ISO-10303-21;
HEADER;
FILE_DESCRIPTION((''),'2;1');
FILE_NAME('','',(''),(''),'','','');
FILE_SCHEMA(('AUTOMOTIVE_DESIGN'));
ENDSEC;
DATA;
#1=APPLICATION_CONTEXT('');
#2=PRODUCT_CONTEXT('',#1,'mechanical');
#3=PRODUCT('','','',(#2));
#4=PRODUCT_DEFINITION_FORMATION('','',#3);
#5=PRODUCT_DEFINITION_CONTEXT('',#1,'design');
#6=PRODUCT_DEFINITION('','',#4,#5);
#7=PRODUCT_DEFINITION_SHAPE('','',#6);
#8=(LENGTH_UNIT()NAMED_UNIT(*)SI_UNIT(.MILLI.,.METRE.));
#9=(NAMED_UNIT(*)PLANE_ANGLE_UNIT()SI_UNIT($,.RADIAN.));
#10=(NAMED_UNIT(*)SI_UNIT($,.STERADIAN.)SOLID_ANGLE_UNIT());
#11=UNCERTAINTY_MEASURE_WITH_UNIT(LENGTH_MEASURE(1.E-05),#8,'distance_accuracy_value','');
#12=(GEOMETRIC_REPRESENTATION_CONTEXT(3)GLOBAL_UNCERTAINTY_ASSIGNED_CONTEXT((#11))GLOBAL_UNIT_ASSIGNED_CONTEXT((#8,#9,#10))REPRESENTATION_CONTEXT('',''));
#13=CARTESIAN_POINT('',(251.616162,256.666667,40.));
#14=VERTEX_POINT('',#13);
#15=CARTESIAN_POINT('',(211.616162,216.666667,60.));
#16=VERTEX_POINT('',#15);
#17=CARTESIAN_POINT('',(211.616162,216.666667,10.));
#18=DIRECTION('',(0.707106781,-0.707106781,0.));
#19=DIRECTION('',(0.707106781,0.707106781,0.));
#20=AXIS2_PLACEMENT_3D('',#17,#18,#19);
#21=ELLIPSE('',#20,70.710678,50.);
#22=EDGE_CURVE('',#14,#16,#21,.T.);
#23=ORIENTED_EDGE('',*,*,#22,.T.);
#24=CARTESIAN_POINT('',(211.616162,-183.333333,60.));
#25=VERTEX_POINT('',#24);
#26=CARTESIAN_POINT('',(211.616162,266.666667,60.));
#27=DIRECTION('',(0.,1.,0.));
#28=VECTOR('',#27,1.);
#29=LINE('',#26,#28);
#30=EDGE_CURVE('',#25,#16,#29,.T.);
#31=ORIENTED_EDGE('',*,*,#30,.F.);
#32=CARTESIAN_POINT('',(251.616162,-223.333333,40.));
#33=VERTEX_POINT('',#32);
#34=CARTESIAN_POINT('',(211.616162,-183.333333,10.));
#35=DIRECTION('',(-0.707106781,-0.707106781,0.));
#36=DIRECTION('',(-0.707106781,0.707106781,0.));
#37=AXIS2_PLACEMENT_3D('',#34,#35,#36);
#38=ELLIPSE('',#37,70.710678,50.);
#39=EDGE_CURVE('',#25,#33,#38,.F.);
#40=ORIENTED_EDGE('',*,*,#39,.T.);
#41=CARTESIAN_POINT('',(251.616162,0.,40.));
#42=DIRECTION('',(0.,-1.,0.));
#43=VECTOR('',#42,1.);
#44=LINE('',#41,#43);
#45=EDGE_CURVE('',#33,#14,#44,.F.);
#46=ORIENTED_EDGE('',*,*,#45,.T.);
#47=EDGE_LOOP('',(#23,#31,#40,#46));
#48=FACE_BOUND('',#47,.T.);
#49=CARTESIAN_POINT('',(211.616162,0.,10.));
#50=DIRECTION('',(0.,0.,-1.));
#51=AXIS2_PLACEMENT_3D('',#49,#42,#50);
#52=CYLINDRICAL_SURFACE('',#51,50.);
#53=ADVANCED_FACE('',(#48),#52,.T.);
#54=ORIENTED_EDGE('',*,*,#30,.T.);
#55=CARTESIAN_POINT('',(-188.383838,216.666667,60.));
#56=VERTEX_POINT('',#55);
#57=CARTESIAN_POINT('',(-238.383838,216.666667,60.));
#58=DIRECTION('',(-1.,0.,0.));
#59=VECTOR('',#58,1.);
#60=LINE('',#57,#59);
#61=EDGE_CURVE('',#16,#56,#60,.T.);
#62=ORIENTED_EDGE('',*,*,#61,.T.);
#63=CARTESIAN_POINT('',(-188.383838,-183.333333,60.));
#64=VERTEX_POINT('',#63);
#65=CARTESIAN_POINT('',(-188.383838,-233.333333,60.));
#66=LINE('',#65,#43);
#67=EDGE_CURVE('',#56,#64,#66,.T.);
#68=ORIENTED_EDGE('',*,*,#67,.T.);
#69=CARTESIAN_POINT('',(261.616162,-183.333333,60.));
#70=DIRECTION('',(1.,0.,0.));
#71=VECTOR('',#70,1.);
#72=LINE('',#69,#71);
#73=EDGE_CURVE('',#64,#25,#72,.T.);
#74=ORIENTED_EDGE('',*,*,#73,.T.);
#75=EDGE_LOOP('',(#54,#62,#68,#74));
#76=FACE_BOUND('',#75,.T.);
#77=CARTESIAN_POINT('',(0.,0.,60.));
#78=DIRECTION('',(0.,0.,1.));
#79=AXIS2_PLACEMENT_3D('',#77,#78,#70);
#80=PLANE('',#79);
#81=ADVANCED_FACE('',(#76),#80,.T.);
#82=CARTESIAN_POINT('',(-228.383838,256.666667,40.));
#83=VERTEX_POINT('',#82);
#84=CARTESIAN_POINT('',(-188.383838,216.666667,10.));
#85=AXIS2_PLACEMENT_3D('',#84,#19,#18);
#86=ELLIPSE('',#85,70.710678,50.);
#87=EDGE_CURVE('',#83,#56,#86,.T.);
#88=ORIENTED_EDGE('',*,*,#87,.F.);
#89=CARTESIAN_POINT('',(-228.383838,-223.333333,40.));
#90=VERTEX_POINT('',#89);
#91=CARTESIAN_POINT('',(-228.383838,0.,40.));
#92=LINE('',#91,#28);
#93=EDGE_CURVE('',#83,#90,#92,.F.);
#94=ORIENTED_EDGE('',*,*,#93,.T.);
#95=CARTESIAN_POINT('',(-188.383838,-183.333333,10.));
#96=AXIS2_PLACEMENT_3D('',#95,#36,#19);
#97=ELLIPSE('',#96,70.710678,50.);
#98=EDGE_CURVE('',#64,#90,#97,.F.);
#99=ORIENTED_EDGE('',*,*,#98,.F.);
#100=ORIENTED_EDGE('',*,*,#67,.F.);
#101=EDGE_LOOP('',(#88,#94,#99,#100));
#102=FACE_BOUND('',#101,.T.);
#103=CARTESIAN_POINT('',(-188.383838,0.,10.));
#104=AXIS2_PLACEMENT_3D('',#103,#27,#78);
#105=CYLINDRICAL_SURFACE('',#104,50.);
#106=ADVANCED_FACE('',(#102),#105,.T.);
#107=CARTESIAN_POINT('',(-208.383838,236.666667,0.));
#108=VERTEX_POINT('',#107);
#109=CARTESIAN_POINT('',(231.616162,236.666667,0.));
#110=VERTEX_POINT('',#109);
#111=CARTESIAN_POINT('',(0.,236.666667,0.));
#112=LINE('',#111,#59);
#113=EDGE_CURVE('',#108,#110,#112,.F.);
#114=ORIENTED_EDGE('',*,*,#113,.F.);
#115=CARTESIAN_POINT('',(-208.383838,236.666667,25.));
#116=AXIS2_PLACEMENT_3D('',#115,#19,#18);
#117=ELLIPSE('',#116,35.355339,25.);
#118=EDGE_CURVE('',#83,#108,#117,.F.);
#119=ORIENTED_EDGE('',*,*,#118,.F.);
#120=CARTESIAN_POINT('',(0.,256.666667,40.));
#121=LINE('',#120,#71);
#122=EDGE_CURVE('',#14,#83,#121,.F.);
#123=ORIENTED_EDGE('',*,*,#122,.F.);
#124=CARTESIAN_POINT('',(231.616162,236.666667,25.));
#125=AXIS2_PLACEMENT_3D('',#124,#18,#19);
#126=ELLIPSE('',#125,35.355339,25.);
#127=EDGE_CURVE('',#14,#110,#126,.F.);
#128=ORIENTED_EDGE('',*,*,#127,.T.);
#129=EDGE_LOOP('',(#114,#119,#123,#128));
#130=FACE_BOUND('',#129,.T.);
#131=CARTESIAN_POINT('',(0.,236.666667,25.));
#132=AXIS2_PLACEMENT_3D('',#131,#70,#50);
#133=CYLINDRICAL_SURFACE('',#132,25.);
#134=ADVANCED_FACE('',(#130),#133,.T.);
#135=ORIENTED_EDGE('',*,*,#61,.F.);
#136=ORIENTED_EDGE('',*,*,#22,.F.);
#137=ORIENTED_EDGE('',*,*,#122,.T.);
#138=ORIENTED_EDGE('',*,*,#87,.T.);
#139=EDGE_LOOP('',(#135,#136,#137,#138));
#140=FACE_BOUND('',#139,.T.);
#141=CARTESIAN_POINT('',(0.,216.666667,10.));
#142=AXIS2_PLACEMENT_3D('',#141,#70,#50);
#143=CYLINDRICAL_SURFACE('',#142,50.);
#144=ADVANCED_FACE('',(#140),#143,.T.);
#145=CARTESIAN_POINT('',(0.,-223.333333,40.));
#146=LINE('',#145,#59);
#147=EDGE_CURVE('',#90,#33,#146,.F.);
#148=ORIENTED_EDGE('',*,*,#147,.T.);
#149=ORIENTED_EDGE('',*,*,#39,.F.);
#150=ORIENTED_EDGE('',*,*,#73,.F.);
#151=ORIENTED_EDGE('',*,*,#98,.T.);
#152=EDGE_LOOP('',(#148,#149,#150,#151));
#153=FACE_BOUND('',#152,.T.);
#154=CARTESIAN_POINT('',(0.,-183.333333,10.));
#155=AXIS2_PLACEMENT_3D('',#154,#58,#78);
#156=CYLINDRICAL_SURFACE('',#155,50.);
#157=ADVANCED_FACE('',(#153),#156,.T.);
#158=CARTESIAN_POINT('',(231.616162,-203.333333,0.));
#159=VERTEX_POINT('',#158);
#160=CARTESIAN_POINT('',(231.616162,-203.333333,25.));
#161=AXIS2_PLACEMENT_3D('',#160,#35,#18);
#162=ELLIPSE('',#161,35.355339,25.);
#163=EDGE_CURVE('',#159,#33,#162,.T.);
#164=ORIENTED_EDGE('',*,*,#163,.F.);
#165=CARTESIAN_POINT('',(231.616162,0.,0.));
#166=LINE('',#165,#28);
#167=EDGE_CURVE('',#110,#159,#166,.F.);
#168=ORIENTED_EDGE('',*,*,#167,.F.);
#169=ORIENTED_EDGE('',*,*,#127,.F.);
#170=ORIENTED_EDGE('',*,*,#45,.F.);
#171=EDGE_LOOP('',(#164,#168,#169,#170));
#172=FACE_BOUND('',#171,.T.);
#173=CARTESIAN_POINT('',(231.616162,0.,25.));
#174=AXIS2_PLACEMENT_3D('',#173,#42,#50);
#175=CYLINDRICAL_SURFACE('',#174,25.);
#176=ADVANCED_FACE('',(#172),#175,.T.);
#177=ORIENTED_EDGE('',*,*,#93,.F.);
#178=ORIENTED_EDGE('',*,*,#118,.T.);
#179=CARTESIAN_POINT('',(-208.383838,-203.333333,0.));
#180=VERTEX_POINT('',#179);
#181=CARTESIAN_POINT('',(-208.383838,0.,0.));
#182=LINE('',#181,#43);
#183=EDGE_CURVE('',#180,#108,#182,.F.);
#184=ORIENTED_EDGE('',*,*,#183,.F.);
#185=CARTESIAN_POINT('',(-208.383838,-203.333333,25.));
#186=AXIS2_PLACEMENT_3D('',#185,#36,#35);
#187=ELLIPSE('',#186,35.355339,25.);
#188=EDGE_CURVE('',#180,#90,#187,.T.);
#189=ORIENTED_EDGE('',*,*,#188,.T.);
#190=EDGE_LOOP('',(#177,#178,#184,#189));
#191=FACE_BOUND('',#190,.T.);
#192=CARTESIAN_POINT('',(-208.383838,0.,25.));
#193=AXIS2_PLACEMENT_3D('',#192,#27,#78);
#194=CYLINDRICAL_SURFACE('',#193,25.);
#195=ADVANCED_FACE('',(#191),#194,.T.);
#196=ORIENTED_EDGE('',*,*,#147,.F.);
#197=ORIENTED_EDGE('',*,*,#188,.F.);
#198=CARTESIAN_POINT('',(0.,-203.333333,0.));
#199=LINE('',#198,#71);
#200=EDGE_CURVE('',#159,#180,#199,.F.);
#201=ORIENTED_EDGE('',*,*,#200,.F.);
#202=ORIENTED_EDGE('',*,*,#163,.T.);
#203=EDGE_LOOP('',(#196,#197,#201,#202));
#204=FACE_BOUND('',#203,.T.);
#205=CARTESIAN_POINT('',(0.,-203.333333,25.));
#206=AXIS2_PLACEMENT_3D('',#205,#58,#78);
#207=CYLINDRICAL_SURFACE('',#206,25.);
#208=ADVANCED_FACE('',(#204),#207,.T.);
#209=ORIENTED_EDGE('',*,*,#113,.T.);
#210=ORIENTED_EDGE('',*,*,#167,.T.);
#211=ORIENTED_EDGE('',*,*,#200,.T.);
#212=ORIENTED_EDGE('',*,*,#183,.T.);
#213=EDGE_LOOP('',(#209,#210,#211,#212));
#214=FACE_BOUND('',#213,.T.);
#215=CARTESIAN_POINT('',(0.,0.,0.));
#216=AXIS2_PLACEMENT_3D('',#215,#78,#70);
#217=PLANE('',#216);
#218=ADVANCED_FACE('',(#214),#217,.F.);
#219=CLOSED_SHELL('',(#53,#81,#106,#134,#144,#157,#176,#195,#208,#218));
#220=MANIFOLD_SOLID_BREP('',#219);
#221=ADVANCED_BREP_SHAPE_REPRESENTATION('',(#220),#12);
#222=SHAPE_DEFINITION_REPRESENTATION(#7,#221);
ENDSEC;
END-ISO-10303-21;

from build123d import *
from OCP.BRepAlgoAPI import BRepAlgoAPI_Cut
from OCP.TopTools import TopTools_ListOfShape

# Parameters (mm, degrees)
SKETCH1_W           = 500
SKETCH1_H           = 500
BOSS_EXTRUDE1_DEPTH = 60
FILLET3_R           = 50
FILLET4_R           = 50
FILLET6_START       = -234
FILLET6_DEPTH       = 502
FILLET6_2_DEPTH     = 492


with BuildPart() as part:
    # Sketch1 → Boss-Extrude1 (new body)
    with BuildSketch(Plane.XY):
        with Locations((11.616161616, 16.666666667)):
            Rectangle(SKETCH1_W, SKETCH1_H)
    extrude(amount=BOSS_EXTRUDE1_DEPTH)

    # Fillet3
    fillet3_edges = [part.edges().sort_by_distance(p)[0] for p in [
        (11.616161616, -233.333333333, 60),
        (261.616161616, 16.666666667, 60),
        (11.616161616, 266.666666667, 60),
        (-238.383838384, 16.666666667, 60),
    ]]
    fillet(fillet3_edges, radius=FILLET3_R)

    # Fillet4
    # the kernel refuses this fillet: 50 mm, written as the material it takes off along each edge
    with BuildSketch(Plane(origin=(-238.383838384, 341.666666667, 0), x_dir=(0, 0, 1), z_dir=(0, -1, 0)), Plane(origin=(336.616161616, 266.666666667, 0), x_dir=(0, 0, 1), z_dir=(-1, 0, 0))) as fillet4_piece_1:
        with BuildLine():
            CenterArc((50, -30), FILLET4_R, 143.130102354, 36.869897646)
            Line((0, -30), (-1, -30))
            Line((-1, -30), (-1, 0))
            Line((-1, 0), (0, 1))
            ThreePointArc((0, 1), (5, 1), (9.2, 0.6))
            Line((9.2, 0.6), (10, 0))
        make_face()
    extrude(amount=650, mode=Mode.SUBTRACT)
    with BuildSketch(Plane(origin=(-313.383838384, -233.333333333, 0), x_dir=(0, 1, 0), z_dir=(1, 0, 0)), Plane(origin=(261.616161616, -308.333333333, 0), x_dir=(-1, 0, 0), z_dir=(0, 1, 0))) as fillet4_piece_2:
        with BuildLine():
            CenterArc((30, 50), FILLET4_R, 233.130102354, 36.869897646)
            Line((0, 10), (-0.6, 9.2))
            ThreePointArc((-0.6, 9.2), (-1, 5), (-1, 0))
            Line((-1, 0), (0, -1))
            Line((0, -1), (30, -1))
            Line((30, -1), (30, 0))
        make_face()
    extrude(amount=650, mode=Mode.SUBTRACT)


with BuildPart() as fillet6_tool:
    # Fillet6: read off the stored shape, not the designer's step
    # Fillet6 outline → Fillet6 (new body)
    with BuildSketch(Plane(origin=(0, 0, 0), x_dir=(1, 0, 0), z_dir=(0, 1, 0)).offset(FILLET6_START)):
        with BuildLine():
            ThreePointArc((261.616161616, -10), (247.427549917, -2.565835097), (231.616161616, 0))
            ThreePointArc((231.616161616, 0), (253.976841391, -13.819660113), (251.616161616, -40))
            ThreePointArc((251.616161616, -40), (259.050326518, -25.811388301), (261.616161616, -10))
        make_face()
        with BuildLine():
            ThreePointArc((-228.383838384, -40), (-230.744518159, -13.819660113), (-208.383838384, 0))
            ThreePointArc((-208.383838384, 0), (-224.195226685, -2.565835097), (-238.383838384, -10))
            ThreePointArc((-238.383838384, -10), (-235.818003286, -25.811388301), (-228.383838384, -40))
        make_face()
    extrude(amount=FILLET6_DEPTH)


with BuildPart() as part_1:
    add(part.part)

    # Fillet6: cut by fillet6_tool, with a tolerance
    fillet6_stock = TopTools_ListOfShape()
    fillet6_stock.Append(part_1.part.wrapped)
    fillet6_tools = TopTools_ListOfShape()
    fillet6_tools.Append(fillet6_tool.part.wrapped)
    fillet6_cut = BRepAlgoAPI_Cut()
    fillet6_cut.SetArguments(fillet6_stock)
    fillet6_cut.SetTools(fillet6_tools)
    fillet6_cut.SetFuzzyValue(0.00001)
    fillet6_cut.Build()
    add(Compound.cast(fillet6_cut.Shape()).solids(), mode=Mode.REPLACE)


with BuildPart() as fillet6_2_tool:
    # Fillet6 2 outline → Fillet6 2 (new body)
    with BuildSketch(Plane.YZ.offset(FILLET6_START)):
        with BuildLine():
            ThreePointArc((-233.333333333, 10), (-219.144721634, 2.565835097), (-203.333333333, 0))
            ThreePointArc((-203.333333333, 0), (-225.694013108, 13.819660113), (-223.333333333, 40))
            ThreePointArc((-223.333333333, 40), (-230.767498236, 25.811388301), (-233.333333333, 10))
        make_face()
        with BuildLine():
            ThreePointArc((256.666666667, 40), (259.027346442, 13.819660113), (236.666666667, 0))
            ThreePointArc((236.666666667, 0), (252.478054612, 2.565834979), (266.666666667, 10))
            ThreePointArc((266.666666667, 10), (264.100831569, 25.811388301), (256.666666667, 40))
        make_face()
    extrude(amount=FILLET6_2_DEPTH)


with BuildPart() as part_2:
    add(part_1.part)

    # Fillet6 2: cut by fillet6_2_tool, with a tolerance
    fillet6_2_stock = TopTools_ListOfShape()
    fillet6_2_stock.Append(part_2.part.wrapped)
    fillet6_2_tools = TopTools_ListOfShape()
    fillet6_2_tools.Append(fillet6_2_tool.part.wrapped)
    fillet6_2_cut = BRepAlgoAPI_Cut()
    fillet6_2_cut.SetArguments(fillet6_2_stock)
    fillet6_2_cut.SetTools(fillet6_2_tools)
    fillet6_2_cut.SetFuzzyValue(0.00001)
    fillet6_2_cut.Build()
    add(Compound.cast(fillet6_2_cut.Shape()).solids(), mode=Mode.REPLACE)


solid = part_2.part
